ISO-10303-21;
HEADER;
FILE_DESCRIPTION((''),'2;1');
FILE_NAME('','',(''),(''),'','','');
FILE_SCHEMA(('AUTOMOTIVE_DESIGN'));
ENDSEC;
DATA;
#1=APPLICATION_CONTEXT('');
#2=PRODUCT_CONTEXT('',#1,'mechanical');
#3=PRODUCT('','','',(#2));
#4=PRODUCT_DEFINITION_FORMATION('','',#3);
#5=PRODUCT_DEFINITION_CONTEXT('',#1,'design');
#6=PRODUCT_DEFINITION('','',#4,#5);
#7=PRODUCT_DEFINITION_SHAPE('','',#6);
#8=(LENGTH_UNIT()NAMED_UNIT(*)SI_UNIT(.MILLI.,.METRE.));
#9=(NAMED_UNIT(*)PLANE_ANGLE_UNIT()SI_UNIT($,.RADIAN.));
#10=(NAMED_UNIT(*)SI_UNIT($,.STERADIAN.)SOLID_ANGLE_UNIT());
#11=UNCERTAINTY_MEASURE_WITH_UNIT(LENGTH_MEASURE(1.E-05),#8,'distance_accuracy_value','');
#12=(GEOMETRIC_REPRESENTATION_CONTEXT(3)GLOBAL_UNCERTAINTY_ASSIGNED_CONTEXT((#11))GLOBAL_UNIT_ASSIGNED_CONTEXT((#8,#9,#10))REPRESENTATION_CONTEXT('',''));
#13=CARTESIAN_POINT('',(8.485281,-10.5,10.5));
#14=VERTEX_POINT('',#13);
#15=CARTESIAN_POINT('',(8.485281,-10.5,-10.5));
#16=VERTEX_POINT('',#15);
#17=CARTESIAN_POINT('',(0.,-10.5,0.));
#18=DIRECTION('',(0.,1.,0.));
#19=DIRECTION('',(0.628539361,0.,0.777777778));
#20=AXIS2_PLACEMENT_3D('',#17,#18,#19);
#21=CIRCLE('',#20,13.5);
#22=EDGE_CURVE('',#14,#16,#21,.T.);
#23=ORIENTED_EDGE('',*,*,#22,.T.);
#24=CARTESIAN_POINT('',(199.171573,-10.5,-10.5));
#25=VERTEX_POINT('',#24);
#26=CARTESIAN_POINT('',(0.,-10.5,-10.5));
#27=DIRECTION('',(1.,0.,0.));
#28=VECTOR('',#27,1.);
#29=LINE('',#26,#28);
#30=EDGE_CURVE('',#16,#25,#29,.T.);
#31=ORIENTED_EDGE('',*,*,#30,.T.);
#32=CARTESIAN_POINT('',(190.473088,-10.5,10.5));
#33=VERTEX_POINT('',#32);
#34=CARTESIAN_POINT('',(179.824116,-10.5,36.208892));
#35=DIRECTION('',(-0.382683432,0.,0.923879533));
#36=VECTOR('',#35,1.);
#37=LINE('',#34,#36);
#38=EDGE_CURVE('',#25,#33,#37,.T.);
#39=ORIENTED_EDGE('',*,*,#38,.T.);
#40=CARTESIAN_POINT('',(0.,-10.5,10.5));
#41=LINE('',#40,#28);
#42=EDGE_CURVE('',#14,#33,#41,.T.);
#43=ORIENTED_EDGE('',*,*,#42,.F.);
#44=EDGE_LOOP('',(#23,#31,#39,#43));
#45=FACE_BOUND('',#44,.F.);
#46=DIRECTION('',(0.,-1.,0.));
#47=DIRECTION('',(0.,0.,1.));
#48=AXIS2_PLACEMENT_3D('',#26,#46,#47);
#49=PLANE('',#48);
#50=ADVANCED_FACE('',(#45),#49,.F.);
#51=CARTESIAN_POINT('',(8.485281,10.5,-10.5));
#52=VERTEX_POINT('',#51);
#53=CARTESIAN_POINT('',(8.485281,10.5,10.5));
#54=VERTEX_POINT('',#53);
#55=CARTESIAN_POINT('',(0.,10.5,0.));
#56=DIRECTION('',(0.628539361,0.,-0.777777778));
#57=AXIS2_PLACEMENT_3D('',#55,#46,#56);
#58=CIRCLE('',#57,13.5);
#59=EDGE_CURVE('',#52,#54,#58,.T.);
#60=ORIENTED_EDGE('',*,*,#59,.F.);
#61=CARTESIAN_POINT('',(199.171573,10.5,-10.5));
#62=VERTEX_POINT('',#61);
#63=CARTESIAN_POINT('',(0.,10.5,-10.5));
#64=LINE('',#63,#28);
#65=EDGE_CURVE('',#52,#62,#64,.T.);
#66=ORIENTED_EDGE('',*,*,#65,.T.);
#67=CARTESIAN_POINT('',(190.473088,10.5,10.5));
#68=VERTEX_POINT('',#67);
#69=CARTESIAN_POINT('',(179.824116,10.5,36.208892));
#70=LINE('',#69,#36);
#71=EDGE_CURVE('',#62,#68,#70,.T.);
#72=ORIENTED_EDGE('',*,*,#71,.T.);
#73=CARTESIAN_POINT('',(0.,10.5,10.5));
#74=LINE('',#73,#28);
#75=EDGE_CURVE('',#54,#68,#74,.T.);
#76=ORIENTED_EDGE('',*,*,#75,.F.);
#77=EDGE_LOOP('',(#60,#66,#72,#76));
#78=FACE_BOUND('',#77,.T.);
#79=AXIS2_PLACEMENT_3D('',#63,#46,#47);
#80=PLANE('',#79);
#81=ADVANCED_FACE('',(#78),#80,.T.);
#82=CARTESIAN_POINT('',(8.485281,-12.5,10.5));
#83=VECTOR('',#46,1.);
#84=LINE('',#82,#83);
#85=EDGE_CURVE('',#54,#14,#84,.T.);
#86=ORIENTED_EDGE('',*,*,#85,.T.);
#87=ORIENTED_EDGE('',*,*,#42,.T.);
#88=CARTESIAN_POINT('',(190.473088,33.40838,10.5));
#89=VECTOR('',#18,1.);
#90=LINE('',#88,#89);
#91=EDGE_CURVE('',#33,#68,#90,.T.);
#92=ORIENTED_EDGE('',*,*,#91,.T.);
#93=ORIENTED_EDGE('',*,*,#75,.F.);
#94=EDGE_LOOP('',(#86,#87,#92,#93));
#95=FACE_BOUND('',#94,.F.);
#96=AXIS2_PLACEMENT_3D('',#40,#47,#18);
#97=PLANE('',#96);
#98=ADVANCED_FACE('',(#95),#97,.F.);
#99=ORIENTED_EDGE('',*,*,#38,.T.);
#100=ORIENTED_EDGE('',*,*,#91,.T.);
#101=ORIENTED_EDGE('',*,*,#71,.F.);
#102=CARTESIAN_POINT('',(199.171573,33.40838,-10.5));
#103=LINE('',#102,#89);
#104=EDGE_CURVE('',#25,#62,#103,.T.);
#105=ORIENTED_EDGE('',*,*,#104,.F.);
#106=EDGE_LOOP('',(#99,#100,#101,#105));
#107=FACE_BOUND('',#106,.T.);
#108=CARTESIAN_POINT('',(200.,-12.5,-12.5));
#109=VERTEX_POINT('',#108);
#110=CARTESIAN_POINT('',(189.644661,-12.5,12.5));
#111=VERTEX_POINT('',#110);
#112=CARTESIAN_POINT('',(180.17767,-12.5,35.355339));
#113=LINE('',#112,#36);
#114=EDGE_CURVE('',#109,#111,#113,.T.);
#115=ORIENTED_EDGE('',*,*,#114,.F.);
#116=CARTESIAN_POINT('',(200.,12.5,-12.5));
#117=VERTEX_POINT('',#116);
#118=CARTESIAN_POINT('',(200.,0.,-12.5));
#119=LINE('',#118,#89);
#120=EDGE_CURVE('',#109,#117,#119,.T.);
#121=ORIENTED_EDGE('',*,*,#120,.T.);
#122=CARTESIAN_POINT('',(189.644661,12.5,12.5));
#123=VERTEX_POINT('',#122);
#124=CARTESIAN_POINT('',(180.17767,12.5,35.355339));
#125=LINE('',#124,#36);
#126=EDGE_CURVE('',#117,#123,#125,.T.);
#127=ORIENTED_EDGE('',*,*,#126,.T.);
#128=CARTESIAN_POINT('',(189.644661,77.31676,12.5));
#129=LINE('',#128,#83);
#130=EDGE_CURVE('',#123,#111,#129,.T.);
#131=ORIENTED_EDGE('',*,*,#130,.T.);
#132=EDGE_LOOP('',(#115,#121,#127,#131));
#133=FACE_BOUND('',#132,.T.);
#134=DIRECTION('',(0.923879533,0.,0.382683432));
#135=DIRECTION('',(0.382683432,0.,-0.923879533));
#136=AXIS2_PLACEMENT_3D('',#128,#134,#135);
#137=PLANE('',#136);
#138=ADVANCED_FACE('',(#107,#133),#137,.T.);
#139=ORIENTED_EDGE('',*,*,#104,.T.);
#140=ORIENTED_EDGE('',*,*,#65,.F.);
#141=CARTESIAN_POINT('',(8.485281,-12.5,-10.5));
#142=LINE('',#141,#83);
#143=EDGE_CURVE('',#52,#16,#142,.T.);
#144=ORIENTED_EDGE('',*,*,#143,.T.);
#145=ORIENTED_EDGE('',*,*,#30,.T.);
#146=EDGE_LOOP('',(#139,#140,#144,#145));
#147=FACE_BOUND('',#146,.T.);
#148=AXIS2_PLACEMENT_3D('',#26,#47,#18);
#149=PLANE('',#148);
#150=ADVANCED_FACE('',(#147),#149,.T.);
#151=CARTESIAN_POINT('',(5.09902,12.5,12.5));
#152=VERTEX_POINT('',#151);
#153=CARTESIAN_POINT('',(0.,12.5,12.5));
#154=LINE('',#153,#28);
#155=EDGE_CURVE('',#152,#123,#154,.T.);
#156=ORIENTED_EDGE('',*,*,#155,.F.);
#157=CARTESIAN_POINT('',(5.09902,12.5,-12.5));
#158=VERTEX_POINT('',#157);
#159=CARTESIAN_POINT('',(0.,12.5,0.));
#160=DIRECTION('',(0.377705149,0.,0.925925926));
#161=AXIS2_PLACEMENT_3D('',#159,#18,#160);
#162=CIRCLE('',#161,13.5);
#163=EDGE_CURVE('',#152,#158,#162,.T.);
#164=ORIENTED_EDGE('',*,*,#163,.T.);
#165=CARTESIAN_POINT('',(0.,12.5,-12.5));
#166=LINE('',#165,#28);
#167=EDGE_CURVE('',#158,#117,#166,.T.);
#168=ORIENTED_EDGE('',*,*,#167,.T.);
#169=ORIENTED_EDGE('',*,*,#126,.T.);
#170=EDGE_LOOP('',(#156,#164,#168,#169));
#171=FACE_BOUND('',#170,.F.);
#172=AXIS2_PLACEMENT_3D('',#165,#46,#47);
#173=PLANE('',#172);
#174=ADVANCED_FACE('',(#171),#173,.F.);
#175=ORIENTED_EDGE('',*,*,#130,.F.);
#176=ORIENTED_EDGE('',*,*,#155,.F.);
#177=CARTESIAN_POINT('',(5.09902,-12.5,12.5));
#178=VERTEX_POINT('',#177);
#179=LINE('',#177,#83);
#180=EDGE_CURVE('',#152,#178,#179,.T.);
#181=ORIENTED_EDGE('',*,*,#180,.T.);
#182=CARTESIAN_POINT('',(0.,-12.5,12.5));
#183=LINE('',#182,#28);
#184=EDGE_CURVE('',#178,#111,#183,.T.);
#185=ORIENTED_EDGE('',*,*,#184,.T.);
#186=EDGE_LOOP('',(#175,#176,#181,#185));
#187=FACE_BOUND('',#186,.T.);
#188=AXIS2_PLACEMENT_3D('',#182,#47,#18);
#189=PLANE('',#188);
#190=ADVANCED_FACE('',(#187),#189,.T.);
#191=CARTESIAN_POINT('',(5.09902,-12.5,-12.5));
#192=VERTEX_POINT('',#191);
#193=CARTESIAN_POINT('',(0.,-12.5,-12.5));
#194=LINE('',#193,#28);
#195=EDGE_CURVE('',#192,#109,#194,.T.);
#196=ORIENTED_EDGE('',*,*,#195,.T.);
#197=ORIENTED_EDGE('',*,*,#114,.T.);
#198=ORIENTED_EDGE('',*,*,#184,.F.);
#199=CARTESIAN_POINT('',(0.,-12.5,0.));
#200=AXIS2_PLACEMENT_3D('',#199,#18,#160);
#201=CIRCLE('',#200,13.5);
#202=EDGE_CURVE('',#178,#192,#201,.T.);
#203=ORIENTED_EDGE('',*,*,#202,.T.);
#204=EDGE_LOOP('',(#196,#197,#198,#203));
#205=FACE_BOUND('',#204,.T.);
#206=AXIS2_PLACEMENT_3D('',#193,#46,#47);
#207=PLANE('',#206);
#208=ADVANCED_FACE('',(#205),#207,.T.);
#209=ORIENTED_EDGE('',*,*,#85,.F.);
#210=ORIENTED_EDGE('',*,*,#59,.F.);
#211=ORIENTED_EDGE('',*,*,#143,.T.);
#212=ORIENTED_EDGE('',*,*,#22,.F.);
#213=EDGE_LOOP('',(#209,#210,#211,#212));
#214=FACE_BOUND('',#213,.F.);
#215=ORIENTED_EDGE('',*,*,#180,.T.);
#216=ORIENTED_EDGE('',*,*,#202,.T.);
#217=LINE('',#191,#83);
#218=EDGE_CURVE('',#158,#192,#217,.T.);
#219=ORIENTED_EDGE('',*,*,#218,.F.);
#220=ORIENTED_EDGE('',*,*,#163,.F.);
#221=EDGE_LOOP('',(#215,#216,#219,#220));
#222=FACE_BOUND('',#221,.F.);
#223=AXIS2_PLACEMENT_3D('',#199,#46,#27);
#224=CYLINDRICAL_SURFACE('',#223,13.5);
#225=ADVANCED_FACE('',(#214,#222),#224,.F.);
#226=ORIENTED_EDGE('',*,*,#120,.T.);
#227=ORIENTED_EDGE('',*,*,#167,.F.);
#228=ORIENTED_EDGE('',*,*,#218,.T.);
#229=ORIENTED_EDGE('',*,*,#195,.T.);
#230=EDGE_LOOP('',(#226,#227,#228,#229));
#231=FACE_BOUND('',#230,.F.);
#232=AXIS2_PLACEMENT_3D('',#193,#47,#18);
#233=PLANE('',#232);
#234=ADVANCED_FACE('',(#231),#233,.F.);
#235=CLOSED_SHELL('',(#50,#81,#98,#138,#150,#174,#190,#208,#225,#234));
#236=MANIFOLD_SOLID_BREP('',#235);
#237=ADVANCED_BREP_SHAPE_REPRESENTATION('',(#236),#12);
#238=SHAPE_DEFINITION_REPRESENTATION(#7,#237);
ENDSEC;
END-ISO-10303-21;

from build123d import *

# Parameters (mm, degrees)
F0_W        = 25
F0_H        = 25
F0_W_2      = 21
F0_H_2      = 21
F1_DEPTH    = 200
F2_T1_DEPTH = 154.6335196453
F3_R        = 13.5
F4_DEPTH    = 25


# Not quite as in the source:
# - a fillet or chamfer that OpenCascade refuses, or shapes differently, is made with other operations: its cross-section is extruded or revolved along the edge and cut away or added


with BuildPart() as f1:
    # F0 (on Right) → F1 (new body)
    with BuildSketch(Plane.YZ):
        Rectangle(F0_W, F0_H)
        Rectangle(F0_W_2, F0_H_2, mode=Mode.SUBTRACT)
    extrude(amount=F1_DEPTH)

    # F2: chamfer of 25 x 10.3553390593 on 1 edges, made by hand

    # F2_s2 → F2_t1 (cut)
    with BuildSketch(Plane.XZ.offset(-77.3167598227)):
        Polygon((189.6446609407, 12.5), (200, -12.5), (200, 12.5), align=None)
    extrude(amount=F2_T1_DEPTH, mode=Mode.SUBTRACT)

    # F3 (on face) → F4 (cut)
    with BuildSketch(Plane.XZ.offset(12.5)):
        Circle(F3_R)
    extrude(amount=-F4_DEPTH, mode=Mode.SUBTRACT)


solid = f1.part
